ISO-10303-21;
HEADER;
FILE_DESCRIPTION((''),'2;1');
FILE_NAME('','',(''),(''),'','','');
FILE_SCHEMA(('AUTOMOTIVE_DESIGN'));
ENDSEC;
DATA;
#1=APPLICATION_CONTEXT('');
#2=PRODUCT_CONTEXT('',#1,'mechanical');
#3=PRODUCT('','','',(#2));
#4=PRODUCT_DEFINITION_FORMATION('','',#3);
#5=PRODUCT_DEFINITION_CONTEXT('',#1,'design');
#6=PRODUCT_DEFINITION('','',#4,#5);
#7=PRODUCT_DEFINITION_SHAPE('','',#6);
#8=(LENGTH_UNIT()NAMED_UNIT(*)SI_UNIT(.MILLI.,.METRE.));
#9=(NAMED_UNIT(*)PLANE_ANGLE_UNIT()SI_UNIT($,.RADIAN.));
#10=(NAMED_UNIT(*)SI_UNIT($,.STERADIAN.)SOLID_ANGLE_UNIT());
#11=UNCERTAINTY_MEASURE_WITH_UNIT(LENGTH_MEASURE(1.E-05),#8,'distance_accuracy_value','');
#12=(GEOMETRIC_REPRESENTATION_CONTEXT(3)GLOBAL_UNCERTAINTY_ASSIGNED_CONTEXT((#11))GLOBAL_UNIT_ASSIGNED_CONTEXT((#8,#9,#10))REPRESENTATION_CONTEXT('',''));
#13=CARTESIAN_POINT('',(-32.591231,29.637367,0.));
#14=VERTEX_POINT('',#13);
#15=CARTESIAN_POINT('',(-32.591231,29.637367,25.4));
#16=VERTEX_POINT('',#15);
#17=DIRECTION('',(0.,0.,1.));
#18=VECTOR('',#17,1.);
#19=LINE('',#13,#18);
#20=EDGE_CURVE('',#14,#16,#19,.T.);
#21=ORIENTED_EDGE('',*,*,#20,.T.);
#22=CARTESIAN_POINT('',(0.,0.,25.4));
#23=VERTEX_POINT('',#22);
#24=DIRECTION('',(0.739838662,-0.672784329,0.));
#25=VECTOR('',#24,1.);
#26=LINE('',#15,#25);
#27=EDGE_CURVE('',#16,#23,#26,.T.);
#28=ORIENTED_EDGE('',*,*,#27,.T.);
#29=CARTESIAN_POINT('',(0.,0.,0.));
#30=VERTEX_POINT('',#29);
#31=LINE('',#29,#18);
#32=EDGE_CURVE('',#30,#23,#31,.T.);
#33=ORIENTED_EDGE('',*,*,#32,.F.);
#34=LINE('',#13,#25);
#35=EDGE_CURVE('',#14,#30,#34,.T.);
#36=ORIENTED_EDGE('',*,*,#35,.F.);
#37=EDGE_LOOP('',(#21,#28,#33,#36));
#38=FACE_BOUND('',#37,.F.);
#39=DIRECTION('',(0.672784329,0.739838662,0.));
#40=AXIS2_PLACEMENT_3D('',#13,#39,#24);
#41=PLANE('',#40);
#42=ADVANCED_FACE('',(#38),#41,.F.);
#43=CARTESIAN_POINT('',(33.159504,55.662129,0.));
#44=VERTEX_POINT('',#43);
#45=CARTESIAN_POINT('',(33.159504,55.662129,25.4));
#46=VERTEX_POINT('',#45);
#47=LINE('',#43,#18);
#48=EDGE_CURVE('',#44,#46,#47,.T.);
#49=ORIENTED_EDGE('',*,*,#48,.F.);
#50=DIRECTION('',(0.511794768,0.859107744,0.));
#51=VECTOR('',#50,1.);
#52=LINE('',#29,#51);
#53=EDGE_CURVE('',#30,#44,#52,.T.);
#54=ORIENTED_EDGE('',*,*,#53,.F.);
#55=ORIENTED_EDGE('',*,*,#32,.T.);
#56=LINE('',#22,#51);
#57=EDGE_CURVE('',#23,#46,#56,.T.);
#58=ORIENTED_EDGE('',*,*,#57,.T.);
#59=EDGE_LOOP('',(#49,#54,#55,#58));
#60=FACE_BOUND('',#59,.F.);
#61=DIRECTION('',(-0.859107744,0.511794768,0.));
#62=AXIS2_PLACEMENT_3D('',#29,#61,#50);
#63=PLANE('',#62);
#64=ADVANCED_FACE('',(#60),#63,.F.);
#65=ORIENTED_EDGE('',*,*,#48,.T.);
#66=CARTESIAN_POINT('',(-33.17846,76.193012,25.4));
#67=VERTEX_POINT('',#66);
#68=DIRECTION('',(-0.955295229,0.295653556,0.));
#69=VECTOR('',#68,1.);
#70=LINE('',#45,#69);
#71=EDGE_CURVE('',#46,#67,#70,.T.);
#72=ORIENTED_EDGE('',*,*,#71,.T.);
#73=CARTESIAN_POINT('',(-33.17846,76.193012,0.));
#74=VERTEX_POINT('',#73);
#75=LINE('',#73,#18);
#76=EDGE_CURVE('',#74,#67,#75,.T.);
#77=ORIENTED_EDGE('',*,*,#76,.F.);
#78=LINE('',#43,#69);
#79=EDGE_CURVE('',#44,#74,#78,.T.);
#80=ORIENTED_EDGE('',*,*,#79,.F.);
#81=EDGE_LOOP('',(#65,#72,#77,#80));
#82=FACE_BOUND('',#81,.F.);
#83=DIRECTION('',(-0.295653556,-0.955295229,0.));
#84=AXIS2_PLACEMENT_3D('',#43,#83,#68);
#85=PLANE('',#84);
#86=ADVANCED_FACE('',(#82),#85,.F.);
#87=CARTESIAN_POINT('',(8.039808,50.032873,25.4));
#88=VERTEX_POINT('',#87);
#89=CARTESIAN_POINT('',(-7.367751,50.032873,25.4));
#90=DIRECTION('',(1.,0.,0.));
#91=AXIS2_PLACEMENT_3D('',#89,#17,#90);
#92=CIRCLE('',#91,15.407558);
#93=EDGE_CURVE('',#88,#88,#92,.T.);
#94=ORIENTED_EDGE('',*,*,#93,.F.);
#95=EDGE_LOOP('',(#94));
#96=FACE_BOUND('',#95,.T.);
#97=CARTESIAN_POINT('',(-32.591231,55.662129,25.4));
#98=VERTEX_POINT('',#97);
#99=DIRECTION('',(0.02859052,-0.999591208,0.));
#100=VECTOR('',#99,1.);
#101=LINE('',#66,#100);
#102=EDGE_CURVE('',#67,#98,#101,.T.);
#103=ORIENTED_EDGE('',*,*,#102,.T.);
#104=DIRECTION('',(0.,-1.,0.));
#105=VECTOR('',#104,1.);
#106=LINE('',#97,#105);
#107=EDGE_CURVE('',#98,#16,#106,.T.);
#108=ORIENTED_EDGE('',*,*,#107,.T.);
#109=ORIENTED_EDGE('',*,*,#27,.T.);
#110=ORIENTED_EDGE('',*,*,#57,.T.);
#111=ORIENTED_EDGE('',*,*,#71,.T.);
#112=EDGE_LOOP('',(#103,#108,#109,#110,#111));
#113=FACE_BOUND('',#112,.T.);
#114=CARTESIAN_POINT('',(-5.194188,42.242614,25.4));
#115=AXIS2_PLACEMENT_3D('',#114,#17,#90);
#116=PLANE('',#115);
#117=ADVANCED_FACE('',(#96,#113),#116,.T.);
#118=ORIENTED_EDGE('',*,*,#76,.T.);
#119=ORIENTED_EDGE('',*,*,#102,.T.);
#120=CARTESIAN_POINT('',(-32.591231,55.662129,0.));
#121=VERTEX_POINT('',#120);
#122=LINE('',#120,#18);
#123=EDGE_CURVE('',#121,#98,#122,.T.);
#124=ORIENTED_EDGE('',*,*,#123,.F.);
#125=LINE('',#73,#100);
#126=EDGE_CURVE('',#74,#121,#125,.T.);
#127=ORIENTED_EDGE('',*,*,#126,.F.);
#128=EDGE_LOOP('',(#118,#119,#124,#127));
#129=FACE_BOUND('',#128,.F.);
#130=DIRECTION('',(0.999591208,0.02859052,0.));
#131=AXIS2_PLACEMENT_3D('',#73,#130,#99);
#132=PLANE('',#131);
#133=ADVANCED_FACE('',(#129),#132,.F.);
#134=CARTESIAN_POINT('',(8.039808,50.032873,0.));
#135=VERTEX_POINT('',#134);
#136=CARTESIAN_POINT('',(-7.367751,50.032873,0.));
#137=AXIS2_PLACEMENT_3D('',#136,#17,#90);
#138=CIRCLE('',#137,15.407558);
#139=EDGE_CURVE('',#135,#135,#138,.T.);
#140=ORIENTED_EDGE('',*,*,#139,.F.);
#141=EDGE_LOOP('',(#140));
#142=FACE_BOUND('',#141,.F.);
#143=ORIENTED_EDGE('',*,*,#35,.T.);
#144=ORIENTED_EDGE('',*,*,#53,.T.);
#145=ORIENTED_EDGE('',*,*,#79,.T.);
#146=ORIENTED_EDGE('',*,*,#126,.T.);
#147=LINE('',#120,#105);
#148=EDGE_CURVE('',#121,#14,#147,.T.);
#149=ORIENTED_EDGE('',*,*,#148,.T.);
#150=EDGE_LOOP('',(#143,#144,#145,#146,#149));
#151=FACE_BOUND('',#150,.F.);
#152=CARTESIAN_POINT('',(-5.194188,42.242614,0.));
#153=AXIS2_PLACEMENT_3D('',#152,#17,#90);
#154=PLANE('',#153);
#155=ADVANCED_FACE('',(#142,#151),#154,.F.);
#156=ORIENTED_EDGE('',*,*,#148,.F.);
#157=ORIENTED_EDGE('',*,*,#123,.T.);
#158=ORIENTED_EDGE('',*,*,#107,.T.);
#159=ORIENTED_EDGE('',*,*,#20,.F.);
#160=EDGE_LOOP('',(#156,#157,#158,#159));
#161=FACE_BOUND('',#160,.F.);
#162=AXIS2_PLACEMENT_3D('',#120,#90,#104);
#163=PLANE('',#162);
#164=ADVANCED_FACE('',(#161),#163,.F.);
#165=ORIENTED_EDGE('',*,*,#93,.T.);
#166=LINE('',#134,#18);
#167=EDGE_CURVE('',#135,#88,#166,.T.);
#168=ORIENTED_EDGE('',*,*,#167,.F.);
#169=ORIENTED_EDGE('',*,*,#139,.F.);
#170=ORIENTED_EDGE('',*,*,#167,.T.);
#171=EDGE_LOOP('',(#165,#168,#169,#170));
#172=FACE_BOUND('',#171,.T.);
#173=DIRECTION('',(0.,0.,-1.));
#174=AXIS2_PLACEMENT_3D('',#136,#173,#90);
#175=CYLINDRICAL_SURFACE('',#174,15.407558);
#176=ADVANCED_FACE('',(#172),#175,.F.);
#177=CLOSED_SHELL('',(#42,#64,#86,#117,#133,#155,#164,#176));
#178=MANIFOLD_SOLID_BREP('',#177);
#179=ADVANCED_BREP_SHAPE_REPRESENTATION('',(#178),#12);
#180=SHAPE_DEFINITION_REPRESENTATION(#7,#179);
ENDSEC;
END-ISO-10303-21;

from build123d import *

# Parameters (mm, degrees)
F0_R     = 15.4075582886
F1_DEPTH = 25.4


# Not quite as in the source:
# - a feature of the source that left no trace in its solid (it failed there, or was rolled back) is left out


with BuildPart() as f1:
    # F0 (on Top) → F1 (new body)
    with BuildSketch(Plane.XY):
        Polygon((-33.1784598529, 76.1930122972), (-32.5912311673, 55.6621290743), (-32.5912311673, 29.6373665333), (0, 0), (33.1595037133, 55.6621290743), align=None)
        with Locations((-7.3677506298, 50.0328727067)):
            Circle(F0_R, mode=Mode.SUBTRACT)
    extrude(amount=F1_DEPTH)


solid = f1.part
